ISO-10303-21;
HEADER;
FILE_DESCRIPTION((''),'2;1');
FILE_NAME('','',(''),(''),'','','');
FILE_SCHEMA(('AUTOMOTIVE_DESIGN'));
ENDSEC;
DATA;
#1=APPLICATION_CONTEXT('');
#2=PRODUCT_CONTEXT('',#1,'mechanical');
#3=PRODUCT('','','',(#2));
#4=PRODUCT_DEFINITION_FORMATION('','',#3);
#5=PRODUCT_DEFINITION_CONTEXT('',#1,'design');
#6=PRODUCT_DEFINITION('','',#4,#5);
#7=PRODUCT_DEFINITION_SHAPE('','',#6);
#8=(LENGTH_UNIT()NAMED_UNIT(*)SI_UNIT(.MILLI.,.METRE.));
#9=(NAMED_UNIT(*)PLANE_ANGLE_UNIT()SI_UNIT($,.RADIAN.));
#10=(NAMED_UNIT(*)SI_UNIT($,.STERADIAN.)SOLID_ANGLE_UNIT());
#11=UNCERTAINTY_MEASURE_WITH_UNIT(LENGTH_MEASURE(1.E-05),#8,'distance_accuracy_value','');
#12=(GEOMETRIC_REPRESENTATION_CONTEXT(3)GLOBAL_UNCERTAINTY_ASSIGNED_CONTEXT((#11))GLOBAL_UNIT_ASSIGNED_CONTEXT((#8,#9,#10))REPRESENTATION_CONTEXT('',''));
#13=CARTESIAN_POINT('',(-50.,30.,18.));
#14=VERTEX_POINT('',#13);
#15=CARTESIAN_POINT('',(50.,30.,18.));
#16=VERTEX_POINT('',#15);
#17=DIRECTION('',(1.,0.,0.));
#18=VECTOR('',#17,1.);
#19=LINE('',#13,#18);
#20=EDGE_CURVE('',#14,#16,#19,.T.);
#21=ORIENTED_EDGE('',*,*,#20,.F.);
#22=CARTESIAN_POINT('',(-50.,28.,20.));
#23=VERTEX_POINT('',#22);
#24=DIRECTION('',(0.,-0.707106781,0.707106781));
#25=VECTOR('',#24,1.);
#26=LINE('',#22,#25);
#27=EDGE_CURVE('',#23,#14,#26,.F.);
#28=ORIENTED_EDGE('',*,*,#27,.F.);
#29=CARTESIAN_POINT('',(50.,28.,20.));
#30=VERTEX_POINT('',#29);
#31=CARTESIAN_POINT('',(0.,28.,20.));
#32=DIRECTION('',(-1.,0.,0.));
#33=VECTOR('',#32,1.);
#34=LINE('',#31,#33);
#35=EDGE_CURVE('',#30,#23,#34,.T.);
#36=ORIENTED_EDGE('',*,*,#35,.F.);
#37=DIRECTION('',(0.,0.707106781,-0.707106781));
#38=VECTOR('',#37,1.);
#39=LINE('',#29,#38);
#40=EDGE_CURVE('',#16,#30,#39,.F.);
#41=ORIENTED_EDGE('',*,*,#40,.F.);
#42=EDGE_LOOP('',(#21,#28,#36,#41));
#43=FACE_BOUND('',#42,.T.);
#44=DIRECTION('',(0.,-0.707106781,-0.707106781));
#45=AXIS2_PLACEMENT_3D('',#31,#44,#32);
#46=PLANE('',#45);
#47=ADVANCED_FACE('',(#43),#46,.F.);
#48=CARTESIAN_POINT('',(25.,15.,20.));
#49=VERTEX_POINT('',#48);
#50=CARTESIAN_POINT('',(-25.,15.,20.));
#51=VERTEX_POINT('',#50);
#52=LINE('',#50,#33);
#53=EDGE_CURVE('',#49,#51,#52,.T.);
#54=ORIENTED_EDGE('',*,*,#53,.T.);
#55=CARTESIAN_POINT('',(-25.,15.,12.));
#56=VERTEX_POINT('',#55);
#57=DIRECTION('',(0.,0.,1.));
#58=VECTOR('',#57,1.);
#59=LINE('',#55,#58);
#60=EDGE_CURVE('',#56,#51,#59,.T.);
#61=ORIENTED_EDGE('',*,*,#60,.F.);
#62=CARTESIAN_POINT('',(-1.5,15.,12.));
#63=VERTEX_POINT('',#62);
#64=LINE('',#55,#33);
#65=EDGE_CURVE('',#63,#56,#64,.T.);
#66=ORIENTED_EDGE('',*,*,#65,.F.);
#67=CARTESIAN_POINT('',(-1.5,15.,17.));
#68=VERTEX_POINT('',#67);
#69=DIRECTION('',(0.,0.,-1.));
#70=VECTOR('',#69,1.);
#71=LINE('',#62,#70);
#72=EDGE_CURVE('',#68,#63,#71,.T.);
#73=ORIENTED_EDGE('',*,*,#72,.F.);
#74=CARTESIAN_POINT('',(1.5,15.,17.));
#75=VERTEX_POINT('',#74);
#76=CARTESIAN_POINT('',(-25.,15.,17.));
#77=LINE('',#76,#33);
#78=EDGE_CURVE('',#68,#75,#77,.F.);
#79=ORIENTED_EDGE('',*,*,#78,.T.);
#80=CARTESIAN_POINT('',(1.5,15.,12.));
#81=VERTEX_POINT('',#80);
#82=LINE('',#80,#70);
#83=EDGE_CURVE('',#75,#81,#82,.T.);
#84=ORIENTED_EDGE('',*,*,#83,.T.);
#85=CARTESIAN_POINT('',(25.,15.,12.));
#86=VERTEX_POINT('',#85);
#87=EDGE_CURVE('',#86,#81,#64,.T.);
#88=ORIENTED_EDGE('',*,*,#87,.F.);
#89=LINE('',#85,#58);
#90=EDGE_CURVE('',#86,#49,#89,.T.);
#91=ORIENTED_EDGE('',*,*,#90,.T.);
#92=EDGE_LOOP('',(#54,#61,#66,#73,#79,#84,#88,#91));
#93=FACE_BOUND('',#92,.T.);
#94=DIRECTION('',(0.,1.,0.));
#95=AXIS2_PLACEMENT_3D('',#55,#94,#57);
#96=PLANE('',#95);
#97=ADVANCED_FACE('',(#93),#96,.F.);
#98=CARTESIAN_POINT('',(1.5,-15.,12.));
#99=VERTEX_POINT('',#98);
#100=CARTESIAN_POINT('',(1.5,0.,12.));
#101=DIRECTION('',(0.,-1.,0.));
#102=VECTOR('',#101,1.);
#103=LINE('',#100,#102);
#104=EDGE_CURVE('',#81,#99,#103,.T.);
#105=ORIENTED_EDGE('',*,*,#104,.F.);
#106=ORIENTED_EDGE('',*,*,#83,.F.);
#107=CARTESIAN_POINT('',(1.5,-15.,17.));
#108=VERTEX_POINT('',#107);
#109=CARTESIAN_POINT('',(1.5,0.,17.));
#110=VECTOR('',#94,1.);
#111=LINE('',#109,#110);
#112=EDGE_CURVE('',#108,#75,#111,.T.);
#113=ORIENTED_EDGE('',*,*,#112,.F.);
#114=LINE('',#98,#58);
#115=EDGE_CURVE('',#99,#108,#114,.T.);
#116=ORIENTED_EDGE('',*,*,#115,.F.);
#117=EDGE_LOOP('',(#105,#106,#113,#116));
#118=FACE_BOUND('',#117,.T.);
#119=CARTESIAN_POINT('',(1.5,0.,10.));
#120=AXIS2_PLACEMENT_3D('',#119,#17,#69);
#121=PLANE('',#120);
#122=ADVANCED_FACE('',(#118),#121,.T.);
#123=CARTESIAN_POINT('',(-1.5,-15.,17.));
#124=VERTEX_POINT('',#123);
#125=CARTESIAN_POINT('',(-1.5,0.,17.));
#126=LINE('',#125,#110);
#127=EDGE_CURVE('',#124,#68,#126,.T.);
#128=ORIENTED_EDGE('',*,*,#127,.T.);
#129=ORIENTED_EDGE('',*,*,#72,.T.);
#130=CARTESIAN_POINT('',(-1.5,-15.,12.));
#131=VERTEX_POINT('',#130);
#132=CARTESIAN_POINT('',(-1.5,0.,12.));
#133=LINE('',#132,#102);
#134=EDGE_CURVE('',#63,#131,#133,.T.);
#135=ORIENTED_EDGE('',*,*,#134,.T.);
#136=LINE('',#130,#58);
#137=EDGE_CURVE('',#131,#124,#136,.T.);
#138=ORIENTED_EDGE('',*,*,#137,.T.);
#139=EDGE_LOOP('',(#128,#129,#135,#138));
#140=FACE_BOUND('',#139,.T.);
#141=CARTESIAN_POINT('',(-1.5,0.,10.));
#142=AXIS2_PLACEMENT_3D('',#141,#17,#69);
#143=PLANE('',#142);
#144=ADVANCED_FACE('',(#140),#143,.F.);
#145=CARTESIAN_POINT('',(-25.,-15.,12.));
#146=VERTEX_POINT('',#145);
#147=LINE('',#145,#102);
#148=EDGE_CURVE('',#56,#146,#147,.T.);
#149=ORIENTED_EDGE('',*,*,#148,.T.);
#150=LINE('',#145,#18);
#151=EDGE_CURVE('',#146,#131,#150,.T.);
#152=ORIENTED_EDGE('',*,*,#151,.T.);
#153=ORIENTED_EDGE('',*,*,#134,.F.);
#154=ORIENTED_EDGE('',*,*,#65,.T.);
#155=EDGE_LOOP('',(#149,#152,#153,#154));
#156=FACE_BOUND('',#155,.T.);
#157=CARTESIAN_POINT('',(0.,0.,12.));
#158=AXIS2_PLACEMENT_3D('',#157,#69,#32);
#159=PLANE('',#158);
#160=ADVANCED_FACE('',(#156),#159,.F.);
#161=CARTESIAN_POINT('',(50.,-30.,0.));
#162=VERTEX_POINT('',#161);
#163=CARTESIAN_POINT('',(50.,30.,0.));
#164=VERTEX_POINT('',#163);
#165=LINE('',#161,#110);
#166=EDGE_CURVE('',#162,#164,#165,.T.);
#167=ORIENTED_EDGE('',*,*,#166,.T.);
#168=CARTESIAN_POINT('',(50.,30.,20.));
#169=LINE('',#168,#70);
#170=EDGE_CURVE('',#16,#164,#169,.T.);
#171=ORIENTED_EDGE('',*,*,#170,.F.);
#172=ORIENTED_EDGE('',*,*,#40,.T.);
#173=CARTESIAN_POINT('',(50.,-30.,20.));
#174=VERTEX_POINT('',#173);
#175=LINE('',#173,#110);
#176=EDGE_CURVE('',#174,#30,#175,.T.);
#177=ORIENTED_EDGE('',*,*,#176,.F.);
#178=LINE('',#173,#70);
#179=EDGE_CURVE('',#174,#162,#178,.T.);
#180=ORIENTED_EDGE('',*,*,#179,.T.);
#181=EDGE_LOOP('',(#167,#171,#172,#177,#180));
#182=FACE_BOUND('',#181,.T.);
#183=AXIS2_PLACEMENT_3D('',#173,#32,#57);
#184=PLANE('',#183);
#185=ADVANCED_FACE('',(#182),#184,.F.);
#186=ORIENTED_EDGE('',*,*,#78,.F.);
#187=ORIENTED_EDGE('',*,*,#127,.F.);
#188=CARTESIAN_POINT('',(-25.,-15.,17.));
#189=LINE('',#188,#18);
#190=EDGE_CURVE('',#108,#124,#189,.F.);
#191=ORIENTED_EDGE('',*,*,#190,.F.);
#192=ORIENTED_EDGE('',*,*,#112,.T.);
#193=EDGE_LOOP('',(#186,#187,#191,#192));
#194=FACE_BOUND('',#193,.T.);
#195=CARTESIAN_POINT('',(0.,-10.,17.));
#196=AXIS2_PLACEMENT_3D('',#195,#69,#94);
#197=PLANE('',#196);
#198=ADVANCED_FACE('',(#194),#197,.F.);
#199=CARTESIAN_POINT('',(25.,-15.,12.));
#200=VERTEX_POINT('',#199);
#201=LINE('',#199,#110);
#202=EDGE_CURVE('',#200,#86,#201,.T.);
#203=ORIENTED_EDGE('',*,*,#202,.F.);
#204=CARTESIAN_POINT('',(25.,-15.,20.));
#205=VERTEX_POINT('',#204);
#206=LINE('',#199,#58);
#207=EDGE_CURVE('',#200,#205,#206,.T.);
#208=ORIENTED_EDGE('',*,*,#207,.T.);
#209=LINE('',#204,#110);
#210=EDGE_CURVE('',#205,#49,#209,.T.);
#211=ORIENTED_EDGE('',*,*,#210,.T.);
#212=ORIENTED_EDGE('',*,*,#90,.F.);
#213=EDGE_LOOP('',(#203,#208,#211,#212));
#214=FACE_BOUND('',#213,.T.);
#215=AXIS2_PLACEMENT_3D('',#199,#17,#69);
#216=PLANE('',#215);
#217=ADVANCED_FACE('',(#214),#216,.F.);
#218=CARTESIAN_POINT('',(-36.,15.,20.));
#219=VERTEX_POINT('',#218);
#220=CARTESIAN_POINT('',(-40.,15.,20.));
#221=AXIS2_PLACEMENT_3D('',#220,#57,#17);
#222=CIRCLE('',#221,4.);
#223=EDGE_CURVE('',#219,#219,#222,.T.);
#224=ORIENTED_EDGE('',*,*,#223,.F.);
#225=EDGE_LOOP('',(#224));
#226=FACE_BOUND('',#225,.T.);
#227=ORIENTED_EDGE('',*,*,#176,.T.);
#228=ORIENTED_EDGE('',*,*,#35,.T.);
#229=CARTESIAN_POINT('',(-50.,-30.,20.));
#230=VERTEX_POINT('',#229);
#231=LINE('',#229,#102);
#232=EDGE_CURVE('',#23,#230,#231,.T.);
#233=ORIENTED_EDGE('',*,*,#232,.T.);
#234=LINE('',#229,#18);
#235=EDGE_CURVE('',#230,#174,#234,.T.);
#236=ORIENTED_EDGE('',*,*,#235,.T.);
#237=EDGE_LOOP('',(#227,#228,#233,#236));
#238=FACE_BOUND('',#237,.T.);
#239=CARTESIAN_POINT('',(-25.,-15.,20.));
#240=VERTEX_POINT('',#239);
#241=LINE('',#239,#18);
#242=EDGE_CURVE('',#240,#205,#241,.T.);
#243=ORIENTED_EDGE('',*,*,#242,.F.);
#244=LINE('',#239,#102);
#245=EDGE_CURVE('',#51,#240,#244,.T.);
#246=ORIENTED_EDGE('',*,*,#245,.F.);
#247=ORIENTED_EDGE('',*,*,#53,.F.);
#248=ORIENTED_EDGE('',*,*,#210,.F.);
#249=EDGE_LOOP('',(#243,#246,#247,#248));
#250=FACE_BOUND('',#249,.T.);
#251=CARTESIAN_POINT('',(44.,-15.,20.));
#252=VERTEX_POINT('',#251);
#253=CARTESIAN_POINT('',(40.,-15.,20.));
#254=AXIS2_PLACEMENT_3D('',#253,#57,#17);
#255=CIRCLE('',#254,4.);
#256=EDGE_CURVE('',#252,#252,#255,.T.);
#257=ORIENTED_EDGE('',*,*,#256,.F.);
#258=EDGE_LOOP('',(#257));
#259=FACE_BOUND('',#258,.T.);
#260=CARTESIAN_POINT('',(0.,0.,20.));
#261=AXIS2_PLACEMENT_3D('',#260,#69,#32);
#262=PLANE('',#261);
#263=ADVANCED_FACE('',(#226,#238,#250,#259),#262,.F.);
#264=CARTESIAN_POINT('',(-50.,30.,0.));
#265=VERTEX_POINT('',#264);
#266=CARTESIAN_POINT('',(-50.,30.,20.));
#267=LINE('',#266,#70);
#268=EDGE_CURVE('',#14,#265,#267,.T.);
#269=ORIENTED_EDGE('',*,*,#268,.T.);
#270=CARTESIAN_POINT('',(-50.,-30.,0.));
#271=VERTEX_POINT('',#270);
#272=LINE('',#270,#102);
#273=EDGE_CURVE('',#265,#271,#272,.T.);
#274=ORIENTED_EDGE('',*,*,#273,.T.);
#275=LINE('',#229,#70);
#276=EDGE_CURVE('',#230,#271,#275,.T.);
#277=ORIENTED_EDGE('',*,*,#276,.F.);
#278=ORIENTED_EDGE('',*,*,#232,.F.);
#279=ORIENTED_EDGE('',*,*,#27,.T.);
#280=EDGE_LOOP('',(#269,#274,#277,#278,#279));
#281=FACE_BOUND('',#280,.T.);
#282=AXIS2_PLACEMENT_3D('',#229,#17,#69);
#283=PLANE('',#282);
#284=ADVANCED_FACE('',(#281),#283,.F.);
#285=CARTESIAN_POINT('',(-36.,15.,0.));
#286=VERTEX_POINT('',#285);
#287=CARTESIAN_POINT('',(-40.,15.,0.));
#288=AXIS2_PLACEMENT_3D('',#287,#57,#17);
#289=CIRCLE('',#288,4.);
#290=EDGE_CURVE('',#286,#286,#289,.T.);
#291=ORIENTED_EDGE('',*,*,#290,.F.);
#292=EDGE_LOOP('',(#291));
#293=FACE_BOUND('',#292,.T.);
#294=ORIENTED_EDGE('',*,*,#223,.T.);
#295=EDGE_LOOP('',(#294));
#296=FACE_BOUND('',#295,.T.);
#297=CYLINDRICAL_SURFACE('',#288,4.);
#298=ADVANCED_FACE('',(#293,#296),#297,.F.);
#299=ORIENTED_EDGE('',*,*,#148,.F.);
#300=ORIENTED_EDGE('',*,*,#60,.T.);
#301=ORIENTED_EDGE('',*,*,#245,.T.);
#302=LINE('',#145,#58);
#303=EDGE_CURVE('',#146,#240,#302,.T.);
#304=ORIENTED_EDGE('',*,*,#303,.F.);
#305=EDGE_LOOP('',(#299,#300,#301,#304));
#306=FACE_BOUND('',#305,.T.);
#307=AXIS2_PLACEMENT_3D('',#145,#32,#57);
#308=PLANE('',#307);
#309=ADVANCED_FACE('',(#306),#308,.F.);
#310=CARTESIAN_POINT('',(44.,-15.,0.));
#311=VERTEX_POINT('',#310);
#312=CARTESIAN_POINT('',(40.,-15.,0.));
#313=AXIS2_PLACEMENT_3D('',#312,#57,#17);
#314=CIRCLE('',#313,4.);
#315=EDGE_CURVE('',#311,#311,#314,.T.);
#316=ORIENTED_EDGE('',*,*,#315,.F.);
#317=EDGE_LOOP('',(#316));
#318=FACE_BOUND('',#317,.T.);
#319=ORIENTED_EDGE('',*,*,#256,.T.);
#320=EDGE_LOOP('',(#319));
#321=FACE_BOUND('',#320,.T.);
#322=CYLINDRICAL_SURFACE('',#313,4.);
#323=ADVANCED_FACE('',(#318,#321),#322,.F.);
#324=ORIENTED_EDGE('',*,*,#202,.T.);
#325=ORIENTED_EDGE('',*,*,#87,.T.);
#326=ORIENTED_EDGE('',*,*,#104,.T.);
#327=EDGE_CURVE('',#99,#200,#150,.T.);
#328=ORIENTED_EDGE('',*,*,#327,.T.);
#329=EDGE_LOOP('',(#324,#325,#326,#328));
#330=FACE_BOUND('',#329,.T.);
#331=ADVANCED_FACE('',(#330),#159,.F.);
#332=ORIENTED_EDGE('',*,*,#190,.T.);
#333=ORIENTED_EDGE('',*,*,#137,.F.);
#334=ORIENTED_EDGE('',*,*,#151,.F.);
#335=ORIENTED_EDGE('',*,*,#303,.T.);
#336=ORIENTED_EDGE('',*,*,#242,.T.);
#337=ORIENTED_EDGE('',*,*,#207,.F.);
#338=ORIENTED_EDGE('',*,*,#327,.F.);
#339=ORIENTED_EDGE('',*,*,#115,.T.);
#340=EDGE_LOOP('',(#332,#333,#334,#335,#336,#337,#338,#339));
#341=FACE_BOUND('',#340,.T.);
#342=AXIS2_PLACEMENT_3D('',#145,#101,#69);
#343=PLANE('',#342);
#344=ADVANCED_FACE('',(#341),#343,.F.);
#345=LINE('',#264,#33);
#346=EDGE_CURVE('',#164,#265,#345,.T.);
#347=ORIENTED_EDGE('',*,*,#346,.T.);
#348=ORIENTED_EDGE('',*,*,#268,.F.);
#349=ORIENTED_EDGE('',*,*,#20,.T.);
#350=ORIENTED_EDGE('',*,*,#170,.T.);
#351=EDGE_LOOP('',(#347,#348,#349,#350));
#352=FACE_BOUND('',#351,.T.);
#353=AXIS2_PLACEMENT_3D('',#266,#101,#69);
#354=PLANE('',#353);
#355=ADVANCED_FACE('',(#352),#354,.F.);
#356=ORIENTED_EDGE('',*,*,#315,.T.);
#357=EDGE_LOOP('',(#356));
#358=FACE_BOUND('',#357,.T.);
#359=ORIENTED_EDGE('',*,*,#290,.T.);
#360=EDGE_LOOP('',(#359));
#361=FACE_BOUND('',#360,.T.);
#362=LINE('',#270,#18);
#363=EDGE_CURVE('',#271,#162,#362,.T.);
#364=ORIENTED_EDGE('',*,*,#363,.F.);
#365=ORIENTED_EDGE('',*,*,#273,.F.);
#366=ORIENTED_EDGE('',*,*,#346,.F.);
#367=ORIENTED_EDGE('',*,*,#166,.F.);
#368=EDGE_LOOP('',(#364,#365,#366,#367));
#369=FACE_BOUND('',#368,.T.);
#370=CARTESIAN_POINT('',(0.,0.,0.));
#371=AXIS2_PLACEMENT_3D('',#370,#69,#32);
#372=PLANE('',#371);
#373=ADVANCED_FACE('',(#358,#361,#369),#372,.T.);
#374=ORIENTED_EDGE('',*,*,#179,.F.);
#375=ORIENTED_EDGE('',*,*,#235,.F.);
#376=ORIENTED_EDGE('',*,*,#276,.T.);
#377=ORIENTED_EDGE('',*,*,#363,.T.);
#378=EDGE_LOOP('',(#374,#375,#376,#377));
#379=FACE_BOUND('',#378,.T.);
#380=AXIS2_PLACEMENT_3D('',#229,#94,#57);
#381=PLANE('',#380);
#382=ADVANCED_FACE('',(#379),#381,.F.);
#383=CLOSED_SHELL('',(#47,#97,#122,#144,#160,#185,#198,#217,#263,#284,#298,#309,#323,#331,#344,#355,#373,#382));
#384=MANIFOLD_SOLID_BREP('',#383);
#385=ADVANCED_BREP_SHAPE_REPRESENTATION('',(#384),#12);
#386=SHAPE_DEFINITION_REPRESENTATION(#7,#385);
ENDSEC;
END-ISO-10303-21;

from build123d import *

# Parameters (mm, degrees)
SKIZZE1_W                       = 100
SKIZZE1_H                       = 60
AUFSATZ_LINEAR_AUSTRAGEN1_DEPTH = 20
SKIZZE2_W                       = 50
SKIZZE2_H                       = 30
SCHNITT_LINEAR_AUSTRAGEN1_DEPTH = 8
SKIZZE3_R                       = 4
SCHNITT_LINEAR_AUSTRAGEN2_DEPTH = 62.64414003
SKIZZE4_R                       = 4
SCHNITT_LINEAR_AUSTRAGEN3_DEPTH = 62.64414003
VERST_RKUNGSRIPPE1_REACH        = 63.644
SKIZZE5_WALL_W                  = 145.28828006
SKIZZE5_WALL_H                  = 3
FASE1_SIZE                      = 2


with BuildPart() as part:
    # Skizze1 → Aufsatz-Linear austragen1 (new body)
    with BuildSketch(Plane.XY):
        Rectangle(SKIZZE1_W, SKIZZE1_H)
    extrude(amount=AUFSATZ_LINEAR_AUSTRAGEN1_DEPTH)

    # Skizze2 → Schnitt-Linear austragen1 (cut)
    with BuildSketch(Plane.XY.offset(20)):
        Rectangle(SKIZZE2_W, SKIZZE2_H)
    extrude(amount=-SCHNITT_LINEAR_AUSTRAGEN1_DEPTH, mode=Mode.SUBTRACT)

    # Skizze3 → Schnitt-Linear austragen2 (cut, through all)
    with BuildSketch(Plane.XY.offset(20)):
        with Locations((-40, 15)):
            Circle(SKIZZE3_R)
    extrude(amount=-SCHNITT_LINEAR_AUSTRAGEN2_DEPTH, mode=Mode.SUBTRACT)

    # Skizze4 → Schnitt-Linear austragen3 (cut, through all)
    with BuildSketch(Plane.XY.offset(20)):
        with Locations((40, -15)):
            Circle(SKIZZE4_R)
    extrude(amount=-SCHNITT_LINEAR_AUSTRAGEN3_DEPTH, mode=Mode.SUBTRACT)

    # Skizze5 wall → Verstärkungsrippe1 (add, up to next)
    with BuildSketch(Plane(origin=(0, 0, 17), x_dir=(0, 1, 0), z_dir=(0, 0, 1)), mode=Mode.PRIVATE) as verst_rkungsrippe1_sk1:
        Rectangle(SKIZZE5_WALL_W, SKIZZE5_WALL_H)
    verst_rkungsrippe1_tool1 = extrude(verst_rkungsrippe1_sk1.sketch, amount=-VERST_RKUNGSRIPPE1_REACH, mode=Mode.PRIVATE) - part.part
    add(verst_rkungsrippe1_tool1.solids().sort_by_distance((0, 0, 17))[0])

    # Fase1
    fase1_edges = [part.edges().sort_by_distance(p)[0] for p in [
        (0, 30, 20),
    ]]
    chamfer(fase1_edges, length=FASE1_SIZE)


solid = part.part
